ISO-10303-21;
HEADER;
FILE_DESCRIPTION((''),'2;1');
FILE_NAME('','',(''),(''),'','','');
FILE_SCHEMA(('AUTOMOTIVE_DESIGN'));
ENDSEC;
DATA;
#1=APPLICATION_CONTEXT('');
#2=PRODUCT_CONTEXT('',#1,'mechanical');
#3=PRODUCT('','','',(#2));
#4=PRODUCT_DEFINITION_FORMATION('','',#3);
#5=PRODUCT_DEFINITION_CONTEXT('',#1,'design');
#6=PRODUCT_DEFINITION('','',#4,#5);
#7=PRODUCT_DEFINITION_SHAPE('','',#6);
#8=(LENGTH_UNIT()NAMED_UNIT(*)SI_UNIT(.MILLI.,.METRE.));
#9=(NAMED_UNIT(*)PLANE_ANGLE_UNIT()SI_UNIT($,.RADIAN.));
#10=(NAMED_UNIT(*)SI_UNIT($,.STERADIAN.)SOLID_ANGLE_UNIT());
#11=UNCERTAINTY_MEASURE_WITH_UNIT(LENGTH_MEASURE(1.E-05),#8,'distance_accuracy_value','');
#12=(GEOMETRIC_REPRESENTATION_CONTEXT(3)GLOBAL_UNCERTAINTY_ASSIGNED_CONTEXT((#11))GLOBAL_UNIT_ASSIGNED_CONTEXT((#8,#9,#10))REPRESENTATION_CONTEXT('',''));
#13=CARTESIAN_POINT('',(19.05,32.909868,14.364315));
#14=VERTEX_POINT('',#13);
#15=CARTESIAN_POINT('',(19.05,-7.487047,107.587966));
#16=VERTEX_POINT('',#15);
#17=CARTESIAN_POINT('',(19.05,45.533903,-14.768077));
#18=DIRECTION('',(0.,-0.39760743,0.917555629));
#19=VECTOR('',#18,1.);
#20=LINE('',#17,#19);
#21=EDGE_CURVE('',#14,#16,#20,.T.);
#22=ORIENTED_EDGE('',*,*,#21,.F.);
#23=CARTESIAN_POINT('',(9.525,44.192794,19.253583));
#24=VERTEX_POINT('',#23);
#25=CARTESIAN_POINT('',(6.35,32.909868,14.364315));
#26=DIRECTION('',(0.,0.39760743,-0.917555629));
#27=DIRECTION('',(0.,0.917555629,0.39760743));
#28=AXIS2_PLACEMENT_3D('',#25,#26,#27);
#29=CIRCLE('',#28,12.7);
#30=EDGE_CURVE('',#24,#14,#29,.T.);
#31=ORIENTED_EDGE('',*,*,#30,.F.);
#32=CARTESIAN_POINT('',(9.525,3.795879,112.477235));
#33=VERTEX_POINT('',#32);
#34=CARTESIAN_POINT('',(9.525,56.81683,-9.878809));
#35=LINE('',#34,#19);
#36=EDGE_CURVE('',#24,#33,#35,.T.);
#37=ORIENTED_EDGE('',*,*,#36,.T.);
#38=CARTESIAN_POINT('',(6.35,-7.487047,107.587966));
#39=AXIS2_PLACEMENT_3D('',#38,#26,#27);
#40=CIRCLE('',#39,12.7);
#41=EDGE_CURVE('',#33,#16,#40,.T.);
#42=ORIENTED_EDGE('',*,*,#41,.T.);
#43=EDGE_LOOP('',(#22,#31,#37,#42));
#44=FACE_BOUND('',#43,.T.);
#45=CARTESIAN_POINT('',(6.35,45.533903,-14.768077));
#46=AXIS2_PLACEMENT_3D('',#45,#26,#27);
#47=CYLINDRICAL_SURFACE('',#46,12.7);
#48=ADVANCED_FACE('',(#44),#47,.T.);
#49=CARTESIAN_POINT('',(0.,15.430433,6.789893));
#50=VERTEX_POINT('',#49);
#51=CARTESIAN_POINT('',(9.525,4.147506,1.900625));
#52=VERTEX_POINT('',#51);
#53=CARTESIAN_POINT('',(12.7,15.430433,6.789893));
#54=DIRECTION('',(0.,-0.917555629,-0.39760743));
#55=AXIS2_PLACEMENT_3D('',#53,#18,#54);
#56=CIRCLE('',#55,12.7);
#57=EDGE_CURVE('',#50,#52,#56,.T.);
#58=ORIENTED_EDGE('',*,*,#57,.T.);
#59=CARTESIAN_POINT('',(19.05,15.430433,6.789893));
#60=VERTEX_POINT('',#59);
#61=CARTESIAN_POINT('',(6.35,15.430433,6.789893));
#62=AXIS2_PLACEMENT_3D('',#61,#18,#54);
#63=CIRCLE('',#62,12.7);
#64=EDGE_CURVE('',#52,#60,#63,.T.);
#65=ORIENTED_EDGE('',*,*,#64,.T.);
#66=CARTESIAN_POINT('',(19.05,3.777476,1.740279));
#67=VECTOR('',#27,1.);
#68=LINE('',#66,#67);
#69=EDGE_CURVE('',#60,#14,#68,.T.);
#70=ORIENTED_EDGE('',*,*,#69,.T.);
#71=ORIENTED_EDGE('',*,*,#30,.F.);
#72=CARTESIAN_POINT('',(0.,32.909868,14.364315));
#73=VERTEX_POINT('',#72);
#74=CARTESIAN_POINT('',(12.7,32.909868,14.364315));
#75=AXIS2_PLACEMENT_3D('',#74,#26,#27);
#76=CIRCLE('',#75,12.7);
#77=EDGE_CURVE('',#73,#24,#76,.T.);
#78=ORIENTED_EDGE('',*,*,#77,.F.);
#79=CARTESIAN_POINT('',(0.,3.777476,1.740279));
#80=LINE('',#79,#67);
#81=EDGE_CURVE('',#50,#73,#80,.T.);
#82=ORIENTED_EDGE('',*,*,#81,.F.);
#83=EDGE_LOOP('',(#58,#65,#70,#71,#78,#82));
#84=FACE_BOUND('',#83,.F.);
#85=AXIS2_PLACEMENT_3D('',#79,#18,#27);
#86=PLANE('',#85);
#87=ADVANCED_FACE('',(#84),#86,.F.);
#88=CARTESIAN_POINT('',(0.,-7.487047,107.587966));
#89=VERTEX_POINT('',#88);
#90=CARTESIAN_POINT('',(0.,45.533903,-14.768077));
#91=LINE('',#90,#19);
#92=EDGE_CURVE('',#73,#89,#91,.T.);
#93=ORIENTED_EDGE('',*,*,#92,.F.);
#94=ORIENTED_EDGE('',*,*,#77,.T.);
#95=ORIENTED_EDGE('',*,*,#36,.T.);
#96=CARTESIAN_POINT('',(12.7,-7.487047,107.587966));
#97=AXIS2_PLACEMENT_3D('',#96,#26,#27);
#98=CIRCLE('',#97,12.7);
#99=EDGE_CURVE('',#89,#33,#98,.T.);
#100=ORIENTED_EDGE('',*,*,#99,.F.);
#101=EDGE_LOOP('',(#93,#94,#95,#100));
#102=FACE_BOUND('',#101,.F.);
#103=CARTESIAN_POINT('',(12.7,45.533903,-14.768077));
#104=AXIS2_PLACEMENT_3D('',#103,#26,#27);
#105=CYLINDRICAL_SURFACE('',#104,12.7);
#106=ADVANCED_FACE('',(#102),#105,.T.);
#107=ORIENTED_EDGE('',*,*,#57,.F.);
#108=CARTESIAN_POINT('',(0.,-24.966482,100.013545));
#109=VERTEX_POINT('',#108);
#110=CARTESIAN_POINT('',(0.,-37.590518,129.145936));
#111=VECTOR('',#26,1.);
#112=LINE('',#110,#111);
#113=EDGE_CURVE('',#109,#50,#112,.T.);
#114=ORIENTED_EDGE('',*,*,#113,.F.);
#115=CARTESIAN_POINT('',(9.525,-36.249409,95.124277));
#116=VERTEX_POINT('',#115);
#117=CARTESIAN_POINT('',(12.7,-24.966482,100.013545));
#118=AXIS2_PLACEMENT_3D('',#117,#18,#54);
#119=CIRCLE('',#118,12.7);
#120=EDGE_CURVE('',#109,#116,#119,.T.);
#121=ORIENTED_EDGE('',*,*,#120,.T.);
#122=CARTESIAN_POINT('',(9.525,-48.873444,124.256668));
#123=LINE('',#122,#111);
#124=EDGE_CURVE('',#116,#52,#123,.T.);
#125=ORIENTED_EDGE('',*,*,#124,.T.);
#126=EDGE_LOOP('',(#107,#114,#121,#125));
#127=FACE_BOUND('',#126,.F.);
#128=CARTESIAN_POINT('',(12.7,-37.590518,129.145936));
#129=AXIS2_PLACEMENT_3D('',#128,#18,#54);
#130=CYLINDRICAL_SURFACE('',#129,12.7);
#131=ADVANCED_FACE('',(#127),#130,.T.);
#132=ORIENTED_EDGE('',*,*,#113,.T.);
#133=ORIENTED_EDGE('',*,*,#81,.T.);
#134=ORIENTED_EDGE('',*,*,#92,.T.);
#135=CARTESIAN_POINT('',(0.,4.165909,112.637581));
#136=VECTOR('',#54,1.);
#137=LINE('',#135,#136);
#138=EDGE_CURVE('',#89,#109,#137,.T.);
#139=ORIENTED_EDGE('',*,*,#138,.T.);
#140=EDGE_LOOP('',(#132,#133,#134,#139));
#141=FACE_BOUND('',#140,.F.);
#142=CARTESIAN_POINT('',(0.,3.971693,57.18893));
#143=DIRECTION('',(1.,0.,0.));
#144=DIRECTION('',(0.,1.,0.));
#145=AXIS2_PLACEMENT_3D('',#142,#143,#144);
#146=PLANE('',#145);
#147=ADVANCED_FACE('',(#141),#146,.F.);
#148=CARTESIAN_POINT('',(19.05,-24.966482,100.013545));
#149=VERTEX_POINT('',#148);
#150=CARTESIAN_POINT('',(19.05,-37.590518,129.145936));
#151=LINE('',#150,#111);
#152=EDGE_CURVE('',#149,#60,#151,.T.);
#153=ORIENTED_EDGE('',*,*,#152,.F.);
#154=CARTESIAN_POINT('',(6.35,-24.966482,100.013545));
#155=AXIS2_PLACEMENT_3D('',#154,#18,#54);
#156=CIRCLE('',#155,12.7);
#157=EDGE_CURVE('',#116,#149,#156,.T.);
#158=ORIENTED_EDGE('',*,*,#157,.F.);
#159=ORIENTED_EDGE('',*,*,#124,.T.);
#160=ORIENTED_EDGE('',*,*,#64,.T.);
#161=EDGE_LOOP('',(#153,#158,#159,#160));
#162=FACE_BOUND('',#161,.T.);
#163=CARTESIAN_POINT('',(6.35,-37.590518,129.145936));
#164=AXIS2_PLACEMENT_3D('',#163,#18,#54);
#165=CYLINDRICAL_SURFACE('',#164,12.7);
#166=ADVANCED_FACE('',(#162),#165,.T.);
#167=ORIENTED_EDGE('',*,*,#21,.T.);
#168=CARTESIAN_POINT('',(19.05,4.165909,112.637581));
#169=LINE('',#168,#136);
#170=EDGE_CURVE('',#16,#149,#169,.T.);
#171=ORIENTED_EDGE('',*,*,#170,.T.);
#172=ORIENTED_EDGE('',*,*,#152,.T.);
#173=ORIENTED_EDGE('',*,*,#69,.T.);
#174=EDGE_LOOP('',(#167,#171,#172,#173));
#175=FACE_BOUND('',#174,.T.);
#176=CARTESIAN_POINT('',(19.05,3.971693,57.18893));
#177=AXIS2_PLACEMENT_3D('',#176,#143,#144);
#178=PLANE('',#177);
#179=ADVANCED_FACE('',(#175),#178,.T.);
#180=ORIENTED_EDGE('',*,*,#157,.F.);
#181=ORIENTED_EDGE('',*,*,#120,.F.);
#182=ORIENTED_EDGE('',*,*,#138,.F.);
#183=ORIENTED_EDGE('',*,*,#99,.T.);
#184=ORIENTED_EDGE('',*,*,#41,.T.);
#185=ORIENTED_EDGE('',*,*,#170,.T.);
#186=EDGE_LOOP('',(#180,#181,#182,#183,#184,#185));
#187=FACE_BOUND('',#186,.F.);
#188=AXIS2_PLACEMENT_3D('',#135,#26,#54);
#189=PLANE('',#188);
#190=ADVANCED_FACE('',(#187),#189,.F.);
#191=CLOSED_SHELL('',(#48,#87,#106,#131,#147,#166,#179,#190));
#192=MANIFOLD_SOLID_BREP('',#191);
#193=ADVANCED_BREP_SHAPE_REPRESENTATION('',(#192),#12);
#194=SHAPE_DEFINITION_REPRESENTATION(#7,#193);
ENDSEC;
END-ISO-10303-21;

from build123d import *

# Parameters (mm, degrees)
F1_DEPTH    = 19.05
F2_T1_DEPTH = 165.1
F2_T3_DEPTH = 165.1


# Not quite as in the source:
# - a fillet or chamfer that OpenCascade refuses, or shapes differently, is made with other operations: its cross-section is extruded or revolved along the edge and cut away or added
# - a feature names something its author has since deleted; it is built from what else it names


with BuildPart() as f1:
    # F0 (on Right) → F1 (new body)
    with BuildSketch(Plane.YZ):
        Polygon((-36.6194384832, 94.9639305791), (3.7774763688, 1.7402786959), (44.5628240677, 19.4139289437), (4.1659092157, 112.6375808269), align=None)
    extrude(amount=F1_DEPTH)

    # F2: fillet of radius 12.7 on 4 edges, made by hand

    # F2_s2 → F2_t1 (cut)
    with BuildSketch(Plane(origin=(0, 12.5863228888, -29.0453612057), x_dir=(1, 0, 0), z_dir=(0, -0.3976074296, 0.9175556288))):
        with BuildLine():
            ThreePointArc((12.7, 48.6079924439), (3.7197438789, 44.888248565), (0, 35.9079924439))
            Line((0, 35.9079924439), (0, 48.6079924439))
            Line((0, 48.6079924439), (12.7, 48.6079924439))
        make_face()
        with BuildLine():
            ThreePointArc((6.35, 48.6079924439), (15.3302561211, 44.888248565), (19.05, 35.9079924439))
            Line((19.05, 35.9079924439), (19.05, 48.6079924439))
            Line((19.05, 48.6079924439), (6.35, 48.6079924439))
        make_face()
    extrude(amount=F2_T1_DEPTH, mode=Mode.SUBTRACT)

    # F2_s4 → F2_t3 (cut)
    with BuildSketch(Plane(origin=(0, -53.0586637457, 122.4430731045), x_dir=(1, 0, 0), z_dir=(0, 0.3976074296, -0.9175556288))):
        with BuildLine():
            ThreePointArc((12.7, -4.1579924439), (3.7197438789, -7.8777363228), (0, -16.8579924439))
            Line((0, -16.8579924439), (0, -4.1579924439))
            Line((0, -4.1579924439), (12.7, -4.1579924439))
        make_face()
        with BuildLine():
            ThreePointArc((6.35, -4.1579924439), (15.3302561211, -7.8777363228), (19.05, -16.8579924439))
            Line((19.05, -16.8579924439), (19.05, -4.1579924439))
            Line((19.05, -4.1579924439), (6.35, -4.1579924439))
        make_face()
    extrude(amount=F2_T3_DEPTH, mode=Mode.SUBTRACT)


solid = f1.part
